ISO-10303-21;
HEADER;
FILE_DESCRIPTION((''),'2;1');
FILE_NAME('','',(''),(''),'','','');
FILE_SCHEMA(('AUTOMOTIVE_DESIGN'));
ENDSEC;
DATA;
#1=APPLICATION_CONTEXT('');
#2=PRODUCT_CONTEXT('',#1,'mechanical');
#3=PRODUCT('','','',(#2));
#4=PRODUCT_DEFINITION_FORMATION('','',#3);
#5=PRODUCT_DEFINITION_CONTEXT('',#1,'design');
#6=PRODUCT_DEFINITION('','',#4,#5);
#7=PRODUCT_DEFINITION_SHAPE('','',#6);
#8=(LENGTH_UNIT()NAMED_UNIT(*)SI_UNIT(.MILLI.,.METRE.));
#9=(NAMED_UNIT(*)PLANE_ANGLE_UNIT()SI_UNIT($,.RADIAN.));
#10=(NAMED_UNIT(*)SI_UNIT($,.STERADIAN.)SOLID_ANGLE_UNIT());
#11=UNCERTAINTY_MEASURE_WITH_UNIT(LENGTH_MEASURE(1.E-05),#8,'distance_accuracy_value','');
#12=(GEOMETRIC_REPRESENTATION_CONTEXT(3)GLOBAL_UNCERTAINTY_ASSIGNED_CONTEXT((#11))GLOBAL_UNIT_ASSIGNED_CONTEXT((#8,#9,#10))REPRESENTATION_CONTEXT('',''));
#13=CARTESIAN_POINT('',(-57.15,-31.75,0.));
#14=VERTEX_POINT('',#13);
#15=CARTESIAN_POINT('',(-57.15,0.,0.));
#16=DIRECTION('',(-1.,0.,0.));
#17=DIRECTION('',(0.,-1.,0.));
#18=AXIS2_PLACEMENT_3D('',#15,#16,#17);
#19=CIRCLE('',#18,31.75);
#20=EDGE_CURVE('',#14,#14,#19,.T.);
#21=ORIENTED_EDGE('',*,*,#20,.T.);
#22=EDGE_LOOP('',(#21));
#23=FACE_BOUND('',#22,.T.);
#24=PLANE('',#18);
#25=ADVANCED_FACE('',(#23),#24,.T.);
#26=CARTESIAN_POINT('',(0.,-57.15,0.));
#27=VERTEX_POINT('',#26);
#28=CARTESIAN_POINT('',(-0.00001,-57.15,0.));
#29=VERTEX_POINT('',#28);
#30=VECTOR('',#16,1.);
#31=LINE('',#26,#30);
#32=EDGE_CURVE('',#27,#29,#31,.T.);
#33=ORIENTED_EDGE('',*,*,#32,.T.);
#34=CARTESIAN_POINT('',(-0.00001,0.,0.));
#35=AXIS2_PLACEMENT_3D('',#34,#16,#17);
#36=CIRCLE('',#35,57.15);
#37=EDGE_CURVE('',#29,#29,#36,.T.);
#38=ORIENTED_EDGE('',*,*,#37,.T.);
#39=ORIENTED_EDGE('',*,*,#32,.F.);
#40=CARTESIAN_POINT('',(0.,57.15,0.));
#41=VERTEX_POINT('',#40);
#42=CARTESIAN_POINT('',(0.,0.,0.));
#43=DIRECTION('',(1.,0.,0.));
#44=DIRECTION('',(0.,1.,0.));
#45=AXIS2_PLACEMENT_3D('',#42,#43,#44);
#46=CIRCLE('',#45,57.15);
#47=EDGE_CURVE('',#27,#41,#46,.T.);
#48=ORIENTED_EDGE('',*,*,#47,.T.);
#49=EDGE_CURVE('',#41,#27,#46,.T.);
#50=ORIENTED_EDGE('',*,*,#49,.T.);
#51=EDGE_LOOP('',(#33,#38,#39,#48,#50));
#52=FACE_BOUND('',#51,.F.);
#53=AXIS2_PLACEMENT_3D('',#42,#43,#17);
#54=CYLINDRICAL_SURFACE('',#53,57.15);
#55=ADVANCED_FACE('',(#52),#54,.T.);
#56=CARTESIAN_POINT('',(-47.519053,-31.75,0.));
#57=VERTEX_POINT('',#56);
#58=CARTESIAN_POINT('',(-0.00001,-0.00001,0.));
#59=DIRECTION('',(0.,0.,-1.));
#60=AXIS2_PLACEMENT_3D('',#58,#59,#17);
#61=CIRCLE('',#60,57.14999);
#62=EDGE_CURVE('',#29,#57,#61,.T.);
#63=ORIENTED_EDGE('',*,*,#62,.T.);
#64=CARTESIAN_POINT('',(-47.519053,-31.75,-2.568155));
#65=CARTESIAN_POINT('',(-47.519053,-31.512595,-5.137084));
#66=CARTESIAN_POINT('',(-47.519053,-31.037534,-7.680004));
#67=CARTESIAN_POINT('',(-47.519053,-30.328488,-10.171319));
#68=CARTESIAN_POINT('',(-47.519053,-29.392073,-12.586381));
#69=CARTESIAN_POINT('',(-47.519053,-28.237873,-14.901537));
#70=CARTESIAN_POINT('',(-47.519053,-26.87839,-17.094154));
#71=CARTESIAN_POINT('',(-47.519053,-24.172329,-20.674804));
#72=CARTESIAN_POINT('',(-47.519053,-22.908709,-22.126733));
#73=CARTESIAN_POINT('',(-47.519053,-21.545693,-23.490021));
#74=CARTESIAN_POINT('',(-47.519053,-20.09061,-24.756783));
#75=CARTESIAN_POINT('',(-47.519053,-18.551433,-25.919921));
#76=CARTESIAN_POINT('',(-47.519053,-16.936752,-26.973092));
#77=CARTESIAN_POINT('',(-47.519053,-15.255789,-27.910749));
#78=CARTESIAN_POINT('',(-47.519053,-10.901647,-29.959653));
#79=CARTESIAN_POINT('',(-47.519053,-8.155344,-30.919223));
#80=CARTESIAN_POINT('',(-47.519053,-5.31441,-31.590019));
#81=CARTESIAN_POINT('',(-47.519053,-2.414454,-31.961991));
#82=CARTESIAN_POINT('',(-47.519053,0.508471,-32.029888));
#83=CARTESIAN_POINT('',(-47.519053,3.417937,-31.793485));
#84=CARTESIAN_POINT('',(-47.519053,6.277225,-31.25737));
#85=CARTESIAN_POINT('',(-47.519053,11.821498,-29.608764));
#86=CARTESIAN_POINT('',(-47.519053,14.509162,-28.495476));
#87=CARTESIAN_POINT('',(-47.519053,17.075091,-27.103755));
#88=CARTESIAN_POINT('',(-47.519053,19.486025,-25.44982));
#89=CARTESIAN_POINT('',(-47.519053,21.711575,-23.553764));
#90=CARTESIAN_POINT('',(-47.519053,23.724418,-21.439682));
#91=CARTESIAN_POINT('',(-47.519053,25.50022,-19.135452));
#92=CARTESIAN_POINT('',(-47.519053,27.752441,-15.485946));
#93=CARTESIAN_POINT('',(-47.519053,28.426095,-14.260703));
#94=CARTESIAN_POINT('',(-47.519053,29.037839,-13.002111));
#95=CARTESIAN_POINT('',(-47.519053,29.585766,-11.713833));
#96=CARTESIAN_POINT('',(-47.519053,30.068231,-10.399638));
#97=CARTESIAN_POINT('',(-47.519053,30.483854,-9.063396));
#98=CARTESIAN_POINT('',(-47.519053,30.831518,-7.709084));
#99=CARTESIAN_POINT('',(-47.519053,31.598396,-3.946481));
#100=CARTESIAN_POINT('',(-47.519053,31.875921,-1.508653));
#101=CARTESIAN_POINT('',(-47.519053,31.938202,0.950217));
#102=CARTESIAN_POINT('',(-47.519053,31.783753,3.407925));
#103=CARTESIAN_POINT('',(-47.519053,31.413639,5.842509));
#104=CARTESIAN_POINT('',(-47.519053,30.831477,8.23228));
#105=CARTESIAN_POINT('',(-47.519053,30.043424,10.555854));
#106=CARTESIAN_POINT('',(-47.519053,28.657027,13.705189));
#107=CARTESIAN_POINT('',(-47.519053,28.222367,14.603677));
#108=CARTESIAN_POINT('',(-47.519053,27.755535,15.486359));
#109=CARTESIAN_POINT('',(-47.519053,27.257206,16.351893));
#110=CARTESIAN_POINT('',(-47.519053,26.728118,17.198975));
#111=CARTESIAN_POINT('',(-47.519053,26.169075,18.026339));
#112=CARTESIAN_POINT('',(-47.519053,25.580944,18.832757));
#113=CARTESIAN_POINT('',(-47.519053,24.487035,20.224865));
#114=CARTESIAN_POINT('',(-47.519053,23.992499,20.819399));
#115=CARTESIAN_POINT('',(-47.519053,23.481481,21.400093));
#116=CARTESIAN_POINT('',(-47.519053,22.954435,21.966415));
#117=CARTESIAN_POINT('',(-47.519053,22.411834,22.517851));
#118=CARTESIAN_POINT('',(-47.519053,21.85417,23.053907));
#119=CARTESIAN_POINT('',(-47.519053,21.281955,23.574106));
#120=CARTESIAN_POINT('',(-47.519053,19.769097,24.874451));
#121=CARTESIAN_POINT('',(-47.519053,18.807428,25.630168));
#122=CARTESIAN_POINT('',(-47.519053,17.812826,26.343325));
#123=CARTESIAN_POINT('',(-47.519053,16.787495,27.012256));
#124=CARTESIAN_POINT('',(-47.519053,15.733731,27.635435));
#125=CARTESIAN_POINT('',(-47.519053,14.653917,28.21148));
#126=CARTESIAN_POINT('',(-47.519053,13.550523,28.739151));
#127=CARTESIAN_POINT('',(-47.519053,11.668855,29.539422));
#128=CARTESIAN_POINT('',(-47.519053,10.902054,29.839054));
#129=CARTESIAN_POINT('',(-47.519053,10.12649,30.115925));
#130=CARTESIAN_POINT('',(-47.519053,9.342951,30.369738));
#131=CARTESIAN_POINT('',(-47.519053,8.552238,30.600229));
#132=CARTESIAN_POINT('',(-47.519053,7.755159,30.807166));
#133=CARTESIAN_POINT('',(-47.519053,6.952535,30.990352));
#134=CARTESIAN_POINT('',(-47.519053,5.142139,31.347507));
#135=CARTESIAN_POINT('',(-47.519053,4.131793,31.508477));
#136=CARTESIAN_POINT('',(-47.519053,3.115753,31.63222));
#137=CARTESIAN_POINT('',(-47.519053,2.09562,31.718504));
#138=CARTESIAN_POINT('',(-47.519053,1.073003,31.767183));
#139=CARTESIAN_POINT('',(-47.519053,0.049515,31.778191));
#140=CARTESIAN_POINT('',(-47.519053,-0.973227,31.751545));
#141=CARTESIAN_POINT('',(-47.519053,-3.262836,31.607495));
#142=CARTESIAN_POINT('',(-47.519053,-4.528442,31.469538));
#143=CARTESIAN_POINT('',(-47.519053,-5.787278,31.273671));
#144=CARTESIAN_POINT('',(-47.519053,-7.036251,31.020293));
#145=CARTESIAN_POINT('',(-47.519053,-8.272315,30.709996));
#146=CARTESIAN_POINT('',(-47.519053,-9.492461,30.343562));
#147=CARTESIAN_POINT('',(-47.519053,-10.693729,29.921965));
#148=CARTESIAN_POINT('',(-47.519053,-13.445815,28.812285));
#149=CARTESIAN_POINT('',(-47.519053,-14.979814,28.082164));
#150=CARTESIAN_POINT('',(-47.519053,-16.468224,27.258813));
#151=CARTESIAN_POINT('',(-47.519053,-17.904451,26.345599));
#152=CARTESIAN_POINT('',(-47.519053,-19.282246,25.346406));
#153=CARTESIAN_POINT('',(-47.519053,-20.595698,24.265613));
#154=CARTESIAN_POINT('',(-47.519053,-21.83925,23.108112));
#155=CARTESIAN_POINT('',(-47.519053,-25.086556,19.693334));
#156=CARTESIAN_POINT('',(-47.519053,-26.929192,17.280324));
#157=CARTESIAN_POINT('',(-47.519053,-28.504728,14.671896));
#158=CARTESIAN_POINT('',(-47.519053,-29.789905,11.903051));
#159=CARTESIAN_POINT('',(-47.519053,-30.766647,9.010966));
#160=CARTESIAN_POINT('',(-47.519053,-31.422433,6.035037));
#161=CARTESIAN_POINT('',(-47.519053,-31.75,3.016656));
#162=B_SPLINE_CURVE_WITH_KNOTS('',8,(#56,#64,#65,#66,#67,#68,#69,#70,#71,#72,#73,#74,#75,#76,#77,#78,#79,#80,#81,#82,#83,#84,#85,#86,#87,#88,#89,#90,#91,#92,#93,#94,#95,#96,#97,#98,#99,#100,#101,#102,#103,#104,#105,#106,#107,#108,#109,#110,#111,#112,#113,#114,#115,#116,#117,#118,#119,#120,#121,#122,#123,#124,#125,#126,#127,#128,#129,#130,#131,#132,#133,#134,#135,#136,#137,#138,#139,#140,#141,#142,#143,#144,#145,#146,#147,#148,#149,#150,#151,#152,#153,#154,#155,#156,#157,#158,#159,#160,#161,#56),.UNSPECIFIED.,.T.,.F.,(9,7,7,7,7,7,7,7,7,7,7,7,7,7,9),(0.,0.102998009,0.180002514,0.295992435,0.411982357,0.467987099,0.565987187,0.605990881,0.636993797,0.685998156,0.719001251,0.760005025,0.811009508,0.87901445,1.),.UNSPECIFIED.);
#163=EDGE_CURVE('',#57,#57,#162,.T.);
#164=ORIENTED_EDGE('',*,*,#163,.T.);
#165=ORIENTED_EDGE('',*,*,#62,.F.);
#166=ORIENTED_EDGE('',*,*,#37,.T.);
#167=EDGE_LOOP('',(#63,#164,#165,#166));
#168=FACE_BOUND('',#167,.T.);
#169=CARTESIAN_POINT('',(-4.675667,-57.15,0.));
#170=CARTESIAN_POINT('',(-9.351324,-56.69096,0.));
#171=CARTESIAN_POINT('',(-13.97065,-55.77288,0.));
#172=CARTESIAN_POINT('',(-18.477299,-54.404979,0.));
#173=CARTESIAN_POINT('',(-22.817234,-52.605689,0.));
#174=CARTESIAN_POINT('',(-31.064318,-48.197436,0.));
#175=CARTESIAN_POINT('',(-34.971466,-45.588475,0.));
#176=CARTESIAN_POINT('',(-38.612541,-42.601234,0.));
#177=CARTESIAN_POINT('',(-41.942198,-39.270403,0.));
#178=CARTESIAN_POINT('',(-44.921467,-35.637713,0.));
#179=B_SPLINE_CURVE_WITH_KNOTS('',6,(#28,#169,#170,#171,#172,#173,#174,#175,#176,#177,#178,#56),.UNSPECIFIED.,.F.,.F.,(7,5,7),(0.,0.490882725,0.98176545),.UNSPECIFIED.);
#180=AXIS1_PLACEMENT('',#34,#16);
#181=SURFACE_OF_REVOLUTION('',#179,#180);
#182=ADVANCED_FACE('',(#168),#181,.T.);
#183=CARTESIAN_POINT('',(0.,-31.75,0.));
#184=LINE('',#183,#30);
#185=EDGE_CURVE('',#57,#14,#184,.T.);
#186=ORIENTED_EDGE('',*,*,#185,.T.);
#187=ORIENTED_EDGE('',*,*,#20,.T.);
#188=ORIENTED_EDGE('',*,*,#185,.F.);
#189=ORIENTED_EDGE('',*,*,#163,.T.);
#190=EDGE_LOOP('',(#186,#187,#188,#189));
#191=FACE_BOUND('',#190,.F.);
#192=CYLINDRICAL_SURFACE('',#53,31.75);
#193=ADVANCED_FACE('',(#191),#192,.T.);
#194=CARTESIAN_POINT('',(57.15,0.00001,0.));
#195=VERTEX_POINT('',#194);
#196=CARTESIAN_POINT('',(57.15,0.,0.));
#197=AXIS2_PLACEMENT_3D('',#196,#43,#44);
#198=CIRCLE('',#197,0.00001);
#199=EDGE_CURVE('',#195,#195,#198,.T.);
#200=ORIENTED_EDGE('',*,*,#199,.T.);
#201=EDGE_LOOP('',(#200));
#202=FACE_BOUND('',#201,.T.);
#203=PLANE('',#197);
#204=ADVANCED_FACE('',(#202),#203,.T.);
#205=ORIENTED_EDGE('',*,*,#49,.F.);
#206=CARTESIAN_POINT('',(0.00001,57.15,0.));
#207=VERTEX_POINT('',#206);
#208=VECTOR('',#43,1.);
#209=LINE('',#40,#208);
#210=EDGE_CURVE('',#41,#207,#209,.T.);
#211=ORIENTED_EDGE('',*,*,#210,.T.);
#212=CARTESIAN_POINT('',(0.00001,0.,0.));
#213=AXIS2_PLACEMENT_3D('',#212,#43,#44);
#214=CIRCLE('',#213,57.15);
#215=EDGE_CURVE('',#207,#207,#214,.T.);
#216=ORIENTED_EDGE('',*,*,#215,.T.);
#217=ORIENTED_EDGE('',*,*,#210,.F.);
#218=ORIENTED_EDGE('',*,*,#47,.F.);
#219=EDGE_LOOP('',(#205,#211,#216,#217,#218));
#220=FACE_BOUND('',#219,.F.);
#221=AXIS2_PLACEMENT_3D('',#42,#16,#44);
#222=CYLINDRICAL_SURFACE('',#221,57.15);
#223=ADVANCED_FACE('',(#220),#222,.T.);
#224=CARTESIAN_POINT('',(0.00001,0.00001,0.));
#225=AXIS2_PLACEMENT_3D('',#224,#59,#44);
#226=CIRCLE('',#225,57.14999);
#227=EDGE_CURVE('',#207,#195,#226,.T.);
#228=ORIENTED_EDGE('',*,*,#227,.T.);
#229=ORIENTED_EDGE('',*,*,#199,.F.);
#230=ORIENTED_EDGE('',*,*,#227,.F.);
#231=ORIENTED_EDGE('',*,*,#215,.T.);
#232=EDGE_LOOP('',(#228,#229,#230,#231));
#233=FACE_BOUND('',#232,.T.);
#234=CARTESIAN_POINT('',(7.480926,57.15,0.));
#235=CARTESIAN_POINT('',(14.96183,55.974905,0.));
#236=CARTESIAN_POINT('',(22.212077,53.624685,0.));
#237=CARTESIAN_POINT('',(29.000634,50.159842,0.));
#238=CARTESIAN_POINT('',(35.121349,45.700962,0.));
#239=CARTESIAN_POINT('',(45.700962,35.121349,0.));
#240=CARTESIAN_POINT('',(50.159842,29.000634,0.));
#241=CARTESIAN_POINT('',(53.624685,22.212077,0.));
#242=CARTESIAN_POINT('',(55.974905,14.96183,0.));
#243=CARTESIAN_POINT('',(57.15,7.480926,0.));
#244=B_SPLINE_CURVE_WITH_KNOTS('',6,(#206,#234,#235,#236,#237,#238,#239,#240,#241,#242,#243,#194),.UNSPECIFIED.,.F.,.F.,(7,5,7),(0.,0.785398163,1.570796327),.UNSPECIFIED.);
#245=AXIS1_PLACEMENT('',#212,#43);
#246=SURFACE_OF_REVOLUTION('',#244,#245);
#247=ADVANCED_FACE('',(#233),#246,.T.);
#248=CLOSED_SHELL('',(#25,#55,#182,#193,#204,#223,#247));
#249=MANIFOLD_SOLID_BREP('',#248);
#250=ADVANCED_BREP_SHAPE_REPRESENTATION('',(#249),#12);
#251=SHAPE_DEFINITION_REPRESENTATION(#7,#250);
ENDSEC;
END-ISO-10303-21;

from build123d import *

# Parameters (mm, degrees)
F0_R     = 57.15
F1_DEPTH = 57.15
F2_R     = 57.15
F3_DEPTH = 57.15
F4_R     = 57.14999
F5_R     = 57.14999
F6_R     = 31.75
F7_DEPTH = 57.15


# Not quite as in the source:
# - a fillet or chamfer is up to 0.001 mm smaller than in the source, because OpenCascade refuses the exact size


with BuildPart() as f1:
    # F0 (on Right) → F1 (new body)
    with BuildSketch(Plane.YZ):
        Circle(F0_R)
    extrude(amount=F1_DEPTH)

    # F2 (on face) → F3 (join)
    with BuildSketch(Plane(origin=(0, 0, 0), x_dir=(0, -1, 0), z_dir=(-1, 0, 0))):
        Circle(F2_R)
    extrude(amount=F3_DEPTH)

    # F4 (radius 57.15 in the source; OpenCascade refuses exactly that, so slightly less here)
    f4_edges = [f1.edges().sort_by_distance(p)[0] for p in [
        (-57.15, 57.15, 0),
    ]]
    fillet(f4_edges, radius=F4_R)

    # F5 (radius 57.15 in the source; OpenCascade refuses exactly that, so slightly less here)
    f5_edges = [f1.edges().sort_by_distance(p)[0] for p in [
        (57.15, -57.15, 0),
    ]]
    fillet(f5_edges, radius=F5_R)

    # F6 (on face) → F7 (join)
    with BuildSketch(Plane(origin=(0, 0, 0), x_dir=(0, -1, 0), z_dir=(-1, 0, 0))):
        Circle(F6_R)
    extrude(amount=F7_DEPTH)


solid = f1.part
